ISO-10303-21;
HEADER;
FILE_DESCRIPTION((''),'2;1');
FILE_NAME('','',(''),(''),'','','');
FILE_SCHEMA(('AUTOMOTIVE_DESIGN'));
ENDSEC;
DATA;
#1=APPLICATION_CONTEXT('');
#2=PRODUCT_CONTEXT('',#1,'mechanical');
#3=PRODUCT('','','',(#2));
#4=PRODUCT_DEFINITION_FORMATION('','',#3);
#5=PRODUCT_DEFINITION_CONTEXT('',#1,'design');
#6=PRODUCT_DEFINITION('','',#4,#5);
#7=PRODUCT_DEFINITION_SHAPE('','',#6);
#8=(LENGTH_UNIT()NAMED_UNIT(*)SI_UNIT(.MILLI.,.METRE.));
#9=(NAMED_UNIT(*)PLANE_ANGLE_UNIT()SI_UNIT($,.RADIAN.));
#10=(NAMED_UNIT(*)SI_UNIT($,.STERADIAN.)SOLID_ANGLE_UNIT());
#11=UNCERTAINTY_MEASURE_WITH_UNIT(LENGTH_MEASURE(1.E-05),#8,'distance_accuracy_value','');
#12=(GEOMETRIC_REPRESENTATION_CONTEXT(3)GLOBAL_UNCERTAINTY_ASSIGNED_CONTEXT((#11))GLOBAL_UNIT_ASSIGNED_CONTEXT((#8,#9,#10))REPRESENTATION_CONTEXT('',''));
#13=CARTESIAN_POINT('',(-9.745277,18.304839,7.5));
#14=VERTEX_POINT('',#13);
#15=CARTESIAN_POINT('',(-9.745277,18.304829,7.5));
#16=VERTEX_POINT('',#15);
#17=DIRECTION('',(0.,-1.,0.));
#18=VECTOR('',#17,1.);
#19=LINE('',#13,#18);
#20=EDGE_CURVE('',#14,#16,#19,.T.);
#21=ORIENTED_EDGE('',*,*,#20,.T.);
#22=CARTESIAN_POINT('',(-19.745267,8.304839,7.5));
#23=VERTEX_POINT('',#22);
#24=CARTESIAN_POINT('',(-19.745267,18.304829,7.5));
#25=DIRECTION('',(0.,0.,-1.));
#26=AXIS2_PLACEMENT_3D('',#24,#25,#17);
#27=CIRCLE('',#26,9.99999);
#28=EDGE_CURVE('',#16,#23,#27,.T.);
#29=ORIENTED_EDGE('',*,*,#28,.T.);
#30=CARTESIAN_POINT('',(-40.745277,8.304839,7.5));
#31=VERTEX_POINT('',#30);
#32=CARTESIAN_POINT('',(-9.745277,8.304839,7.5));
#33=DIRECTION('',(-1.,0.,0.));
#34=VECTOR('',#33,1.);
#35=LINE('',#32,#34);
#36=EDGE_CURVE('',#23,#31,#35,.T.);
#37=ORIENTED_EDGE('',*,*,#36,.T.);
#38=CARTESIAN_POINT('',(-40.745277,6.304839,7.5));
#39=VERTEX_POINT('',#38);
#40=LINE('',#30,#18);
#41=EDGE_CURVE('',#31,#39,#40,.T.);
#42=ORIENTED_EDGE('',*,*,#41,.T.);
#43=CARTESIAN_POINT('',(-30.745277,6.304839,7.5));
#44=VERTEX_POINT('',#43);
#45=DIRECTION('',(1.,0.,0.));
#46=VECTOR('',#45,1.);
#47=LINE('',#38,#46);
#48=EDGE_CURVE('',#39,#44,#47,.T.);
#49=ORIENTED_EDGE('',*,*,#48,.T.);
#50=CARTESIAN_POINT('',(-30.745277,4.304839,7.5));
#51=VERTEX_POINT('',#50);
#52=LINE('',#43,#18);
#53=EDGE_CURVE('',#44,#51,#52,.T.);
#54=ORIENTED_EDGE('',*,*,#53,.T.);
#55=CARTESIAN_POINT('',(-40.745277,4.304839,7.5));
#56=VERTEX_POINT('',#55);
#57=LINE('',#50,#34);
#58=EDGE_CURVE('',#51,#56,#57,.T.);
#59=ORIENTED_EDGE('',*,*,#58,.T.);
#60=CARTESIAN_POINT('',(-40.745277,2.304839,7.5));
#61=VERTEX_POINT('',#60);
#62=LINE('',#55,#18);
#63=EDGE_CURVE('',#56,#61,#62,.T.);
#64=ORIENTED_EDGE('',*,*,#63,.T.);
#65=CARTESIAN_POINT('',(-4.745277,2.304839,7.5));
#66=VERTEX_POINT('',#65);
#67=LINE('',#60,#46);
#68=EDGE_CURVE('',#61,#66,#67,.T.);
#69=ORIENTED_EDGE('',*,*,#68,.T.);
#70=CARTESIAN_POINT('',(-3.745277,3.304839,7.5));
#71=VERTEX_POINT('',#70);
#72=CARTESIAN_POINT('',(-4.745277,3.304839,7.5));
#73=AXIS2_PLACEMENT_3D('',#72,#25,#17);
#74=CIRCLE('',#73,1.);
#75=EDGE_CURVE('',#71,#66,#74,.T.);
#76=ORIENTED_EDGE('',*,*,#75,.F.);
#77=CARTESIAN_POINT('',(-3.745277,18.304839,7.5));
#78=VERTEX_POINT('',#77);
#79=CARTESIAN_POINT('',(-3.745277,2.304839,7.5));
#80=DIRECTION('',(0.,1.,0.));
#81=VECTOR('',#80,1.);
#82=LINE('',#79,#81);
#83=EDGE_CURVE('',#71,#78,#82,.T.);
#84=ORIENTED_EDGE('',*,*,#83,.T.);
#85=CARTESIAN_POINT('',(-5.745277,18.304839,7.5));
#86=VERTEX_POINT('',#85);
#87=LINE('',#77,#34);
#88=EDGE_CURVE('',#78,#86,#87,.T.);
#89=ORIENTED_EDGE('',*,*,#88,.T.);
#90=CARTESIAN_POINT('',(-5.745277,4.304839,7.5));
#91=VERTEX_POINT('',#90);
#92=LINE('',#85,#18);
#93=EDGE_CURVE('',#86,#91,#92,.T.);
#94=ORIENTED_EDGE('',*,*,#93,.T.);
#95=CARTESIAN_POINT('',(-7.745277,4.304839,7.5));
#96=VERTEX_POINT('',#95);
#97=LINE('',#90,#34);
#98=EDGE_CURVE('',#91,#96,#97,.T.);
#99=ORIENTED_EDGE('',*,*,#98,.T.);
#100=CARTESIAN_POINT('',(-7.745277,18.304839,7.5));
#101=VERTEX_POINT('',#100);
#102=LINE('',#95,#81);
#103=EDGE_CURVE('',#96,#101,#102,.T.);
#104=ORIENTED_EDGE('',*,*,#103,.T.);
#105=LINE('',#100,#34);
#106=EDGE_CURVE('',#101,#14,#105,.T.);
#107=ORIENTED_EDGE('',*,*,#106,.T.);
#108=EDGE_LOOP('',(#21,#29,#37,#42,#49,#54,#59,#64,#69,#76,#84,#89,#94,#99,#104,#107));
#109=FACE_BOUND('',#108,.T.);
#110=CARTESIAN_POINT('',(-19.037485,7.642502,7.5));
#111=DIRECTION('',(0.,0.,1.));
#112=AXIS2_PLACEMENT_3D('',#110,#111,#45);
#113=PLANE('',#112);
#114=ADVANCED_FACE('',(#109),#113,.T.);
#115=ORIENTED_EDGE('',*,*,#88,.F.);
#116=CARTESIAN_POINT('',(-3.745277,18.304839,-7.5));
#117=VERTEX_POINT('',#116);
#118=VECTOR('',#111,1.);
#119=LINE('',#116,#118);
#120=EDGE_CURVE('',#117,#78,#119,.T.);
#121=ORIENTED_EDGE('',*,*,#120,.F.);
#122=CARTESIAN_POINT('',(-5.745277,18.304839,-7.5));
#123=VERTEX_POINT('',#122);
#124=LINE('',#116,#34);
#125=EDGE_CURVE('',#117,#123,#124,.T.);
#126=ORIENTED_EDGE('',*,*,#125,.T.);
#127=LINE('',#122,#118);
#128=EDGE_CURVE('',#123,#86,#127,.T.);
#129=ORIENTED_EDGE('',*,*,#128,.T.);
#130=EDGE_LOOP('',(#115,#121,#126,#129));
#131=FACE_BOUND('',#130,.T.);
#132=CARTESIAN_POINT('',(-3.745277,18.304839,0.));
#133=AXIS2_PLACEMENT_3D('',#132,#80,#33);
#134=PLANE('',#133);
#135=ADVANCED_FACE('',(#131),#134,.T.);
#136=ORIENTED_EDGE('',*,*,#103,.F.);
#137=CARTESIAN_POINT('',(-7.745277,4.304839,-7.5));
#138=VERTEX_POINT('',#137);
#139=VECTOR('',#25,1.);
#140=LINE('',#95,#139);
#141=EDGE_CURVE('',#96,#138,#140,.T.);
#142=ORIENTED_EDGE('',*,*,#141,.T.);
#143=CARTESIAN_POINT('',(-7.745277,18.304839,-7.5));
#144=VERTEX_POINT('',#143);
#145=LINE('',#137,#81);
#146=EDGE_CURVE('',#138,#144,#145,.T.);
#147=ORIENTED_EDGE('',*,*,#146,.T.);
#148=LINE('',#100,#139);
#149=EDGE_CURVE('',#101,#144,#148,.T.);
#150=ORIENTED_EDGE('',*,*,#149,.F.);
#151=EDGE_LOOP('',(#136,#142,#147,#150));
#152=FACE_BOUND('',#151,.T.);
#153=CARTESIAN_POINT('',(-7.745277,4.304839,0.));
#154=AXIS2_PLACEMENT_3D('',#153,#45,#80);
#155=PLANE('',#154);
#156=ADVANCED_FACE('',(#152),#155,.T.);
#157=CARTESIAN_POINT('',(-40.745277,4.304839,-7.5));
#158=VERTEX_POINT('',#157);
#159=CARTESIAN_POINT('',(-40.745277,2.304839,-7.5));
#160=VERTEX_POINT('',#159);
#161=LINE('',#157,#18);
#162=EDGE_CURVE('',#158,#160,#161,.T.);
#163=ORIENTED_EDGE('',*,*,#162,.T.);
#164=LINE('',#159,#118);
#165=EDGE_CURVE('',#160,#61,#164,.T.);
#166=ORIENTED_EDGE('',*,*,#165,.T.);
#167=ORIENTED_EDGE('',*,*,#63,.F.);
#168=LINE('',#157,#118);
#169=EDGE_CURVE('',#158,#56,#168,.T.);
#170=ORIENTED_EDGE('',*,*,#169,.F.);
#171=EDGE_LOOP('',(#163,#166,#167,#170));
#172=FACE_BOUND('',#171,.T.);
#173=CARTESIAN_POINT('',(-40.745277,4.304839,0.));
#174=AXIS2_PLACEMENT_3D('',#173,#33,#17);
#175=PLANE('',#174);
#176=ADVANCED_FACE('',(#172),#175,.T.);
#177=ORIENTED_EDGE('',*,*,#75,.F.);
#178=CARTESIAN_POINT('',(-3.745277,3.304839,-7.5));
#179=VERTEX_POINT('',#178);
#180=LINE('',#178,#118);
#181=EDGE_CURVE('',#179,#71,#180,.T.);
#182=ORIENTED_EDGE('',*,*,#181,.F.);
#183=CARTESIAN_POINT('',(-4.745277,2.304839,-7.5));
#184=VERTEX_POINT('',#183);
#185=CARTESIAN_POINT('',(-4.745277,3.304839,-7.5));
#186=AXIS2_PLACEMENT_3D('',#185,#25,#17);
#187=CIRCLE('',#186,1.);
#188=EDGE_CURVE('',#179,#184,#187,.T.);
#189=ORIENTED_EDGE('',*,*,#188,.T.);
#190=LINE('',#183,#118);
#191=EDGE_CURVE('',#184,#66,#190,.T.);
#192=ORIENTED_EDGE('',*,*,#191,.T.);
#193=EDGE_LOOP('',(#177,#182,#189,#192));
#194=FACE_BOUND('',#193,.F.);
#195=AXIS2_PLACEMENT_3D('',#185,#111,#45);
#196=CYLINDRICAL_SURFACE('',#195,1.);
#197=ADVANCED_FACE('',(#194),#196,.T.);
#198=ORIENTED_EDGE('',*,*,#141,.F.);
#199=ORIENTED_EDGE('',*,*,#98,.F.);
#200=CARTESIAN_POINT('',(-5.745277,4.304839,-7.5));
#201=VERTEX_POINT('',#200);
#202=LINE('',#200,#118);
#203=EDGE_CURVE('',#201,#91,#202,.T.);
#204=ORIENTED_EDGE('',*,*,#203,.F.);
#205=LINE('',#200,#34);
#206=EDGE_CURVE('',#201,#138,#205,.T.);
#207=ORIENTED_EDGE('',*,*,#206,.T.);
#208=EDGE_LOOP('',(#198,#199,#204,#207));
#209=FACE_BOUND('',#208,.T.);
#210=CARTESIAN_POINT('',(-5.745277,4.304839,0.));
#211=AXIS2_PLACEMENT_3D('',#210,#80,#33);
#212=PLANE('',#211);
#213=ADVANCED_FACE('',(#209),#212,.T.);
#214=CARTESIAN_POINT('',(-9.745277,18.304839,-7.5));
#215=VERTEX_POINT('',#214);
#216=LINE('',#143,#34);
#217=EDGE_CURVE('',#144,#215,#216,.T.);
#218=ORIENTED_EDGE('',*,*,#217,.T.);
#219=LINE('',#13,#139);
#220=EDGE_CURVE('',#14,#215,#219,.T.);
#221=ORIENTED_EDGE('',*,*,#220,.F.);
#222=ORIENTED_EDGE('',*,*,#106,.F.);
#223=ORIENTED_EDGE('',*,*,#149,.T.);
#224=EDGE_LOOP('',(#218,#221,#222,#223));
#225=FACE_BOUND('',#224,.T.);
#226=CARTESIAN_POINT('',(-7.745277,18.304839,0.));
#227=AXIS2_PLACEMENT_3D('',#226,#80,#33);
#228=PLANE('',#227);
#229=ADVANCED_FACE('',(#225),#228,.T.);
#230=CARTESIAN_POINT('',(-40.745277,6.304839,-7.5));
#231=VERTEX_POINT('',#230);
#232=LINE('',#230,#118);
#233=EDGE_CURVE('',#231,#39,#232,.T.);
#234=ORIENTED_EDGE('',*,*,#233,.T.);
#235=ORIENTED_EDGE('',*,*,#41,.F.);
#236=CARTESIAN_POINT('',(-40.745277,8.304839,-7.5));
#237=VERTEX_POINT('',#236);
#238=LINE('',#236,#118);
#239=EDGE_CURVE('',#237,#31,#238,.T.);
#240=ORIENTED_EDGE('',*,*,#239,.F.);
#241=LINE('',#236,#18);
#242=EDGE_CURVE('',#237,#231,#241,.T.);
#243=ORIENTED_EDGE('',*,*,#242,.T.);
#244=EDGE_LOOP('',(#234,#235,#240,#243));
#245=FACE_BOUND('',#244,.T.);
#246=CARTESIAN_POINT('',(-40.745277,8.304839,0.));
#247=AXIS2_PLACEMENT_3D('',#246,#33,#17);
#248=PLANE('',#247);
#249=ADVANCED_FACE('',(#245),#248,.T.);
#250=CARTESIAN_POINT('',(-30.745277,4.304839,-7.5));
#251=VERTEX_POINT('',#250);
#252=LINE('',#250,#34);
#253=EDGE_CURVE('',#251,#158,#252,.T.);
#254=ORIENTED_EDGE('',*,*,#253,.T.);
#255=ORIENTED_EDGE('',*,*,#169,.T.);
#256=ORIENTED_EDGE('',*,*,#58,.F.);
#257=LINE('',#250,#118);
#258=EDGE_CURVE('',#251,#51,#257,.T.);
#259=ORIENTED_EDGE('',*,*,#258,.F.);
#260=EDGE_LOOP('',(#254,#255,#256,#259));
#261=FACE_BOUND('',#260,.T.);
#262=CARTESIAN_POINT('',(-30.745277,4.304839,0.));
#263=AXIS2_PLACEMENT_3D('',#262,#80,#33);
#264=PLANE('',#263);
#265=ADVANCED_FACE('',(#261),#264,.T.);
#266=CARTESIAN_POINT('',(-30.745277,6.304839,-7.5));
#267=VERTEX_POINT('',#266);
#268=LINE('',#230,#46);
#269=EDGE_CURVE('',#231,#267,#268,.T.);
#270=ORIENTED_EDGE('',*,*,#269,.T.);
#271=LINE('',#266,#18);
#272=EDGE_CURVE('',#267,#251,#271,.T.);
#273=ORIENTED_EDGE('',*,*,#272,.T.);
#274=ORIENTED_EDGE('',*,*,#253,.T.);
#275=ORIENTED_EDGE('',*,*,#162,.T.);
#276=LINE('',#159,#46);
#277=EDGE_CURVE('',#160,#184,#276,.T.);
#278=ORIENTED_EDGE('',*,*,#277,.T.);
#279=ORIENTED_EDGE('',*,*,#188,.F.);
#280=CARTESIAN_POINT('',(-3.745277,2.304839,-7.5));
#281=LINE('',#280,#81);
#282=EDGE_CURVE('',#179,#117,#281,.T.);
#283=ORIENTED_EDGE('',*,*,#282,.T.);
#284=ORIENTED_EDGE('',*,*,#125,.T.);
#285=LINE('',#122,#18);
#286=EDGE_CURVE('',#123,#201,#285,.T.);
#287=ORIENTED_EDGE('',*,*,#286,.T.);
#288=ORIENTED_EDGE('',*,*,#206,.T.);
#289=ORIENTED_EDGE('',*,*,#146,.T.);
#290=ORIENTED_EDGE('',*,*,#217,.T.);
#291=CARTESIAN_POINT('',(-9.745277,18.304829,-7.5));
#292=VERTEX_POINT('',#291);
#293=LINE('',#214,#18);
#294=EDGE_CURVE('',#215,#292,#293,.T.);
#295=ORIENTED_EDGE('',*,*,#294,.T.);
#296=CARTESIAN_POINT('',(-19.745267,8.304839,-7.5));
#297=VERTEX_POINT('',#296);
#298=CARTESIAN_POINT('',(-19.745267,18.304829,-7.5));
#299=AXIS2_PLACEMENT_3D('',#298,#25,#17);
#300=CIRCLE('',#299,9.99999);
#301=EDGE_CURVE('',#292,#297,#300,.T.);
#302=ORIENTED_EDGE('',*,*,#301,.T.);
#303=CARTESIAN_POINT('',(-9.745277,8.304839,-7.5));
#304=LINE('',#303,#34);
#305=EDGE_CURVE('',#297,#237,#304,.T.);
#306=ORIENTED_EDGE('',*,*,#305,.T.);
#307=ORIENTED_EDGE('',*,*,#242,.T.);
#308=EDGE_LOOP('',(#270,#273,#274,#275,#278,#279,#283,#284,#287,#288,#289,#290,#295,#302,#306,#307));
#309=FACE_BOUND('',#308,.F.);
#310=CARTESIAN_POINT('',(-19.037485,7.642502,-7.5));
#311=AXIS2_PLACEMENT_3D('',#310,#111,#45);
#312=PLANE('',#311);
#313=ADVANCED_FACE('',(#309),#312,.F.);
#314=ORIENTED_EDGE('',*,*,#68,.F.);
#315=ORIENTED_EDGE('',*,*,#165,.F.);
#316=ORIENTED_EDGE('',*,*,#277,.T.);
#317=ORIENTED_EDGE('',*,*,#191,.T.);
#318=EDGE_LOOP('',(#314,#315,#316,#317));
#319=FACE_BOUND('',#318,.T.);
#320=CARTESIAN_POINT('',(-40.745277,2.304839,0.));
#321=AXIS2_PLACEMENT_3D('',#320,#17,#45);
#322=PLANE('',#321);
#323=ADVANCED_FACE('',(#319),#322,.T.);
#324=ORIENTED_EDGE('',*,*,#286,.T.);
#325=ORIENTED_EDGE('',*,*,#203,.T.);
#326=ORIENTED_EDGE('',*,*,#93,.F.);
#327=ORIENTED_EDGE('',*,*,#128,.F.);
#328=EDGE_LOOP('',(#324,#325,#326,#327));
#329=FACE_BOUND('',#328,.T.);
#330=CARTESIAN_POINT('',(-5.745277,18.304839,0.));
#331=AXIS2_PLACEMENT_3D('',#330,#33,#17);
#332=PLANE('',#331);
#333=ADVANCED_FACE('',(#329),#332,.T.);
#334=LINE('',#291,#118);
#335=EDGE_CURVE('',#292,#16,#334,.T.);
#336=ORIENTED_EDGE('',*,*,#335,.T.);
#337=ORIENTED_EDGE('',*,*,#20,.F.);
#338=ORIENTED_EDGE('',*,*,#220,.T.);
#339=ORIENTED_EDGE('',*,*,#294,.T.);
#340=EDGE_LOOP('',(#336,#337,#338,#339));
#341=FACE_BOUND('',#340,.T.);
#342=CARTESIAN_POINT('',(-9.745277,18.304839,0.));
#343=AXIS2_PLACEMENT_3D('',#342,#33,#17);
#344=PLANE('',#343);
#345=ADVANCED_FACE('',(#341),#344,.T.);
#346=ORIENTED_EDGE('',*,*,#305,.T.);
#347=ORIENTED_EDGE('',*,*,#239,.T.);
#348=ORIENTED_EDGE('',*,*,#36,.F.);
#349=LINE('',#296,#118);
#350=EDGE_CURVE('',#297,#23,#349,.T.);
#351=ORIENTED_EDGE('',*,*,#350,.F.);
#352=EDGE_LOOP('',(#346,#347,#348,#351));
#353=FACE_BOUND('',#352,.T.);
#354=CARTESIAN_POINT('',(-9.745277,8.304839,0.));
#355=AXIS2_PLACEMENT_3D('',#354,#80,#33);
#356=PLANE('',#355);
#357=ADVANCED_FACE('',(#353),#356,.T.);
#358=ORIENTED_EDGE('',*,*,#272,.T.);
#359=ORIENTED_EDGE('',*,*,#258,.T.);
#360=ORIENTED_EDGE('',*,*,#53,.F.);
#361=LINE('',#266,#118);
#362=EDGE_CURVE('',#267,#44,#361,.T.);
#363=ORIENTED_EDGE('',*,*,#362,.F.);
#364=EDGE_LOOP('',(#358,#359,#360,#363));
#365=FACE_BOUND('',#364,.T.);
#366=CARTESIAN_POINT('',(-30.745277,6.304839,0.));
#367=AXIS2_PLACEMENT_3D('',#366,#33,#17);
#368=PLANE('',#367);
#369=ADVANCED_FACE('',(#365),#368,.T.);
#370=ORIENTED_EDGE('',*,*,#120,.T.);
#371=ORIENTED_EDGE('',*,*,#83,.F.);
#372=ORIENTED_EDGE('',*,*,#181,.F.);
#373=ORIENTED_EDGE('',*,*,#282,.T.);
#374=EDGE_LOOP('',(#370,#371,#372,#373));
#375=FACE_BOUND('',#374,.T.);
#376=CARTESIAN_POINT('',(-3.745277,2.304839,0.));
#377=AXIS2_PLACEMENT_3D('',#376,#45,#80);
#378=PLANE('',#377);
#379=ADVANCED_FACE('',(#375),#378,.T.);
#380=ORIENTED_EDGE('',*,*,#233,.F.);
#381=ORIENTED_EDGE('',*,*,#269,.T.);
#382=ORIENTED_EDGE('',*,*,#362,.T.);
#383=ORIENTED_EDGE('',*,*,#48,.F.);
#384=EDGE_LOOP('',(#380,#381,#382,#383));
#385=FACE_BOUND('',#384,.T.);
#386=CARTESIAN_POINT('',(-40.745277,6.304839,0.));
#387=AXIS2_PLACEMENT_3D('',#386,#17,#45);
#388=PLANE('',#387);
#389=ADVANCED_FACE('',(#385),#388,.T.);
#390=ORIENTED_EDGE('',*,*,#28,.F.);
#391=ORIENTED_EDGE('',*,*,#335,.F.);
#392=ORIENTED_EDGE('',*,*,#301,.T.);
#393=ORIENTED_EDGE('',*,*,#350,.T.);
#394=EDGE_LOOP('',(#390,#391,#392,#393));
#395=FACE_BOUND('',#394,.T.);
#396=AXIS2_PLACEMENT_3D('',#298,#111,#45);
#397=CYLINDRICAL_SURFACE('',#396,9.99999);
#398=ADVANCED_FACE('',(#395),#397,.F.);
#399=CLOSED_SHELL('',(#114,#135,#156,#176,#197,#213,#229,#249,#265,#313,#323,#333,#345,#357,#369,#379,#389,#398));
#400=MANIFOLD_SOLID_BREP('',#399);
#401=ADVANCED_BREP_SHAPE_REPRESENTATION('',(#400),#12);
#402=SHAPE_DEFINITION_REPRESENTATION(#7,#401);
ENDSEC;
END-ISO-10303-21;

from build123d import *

# Parameters (mm, degrees)
F1_DEPTH = 7.5
F2_R     = 9.99999
F3_R     = 1


# Not quite as in the source:
# - a fillet or chamfer is up to 0.001 mm smaller than in the source, because OpenCascade refuses the exact size


with BuildPart() as f1:
    # F0 (on Top) → F1 (new body, symmetric)
    with BuildSketch(Plane.XY):
        Polygon((-9.7452771891, 18.3048394923), (-9.7452771891, 8.3048394923), (-40.7452771891, 8.3048394923), (-40.7452771891, 6.3048394923), (-30.7452771891, 6.3048394923), (-30.7452771891, 4.3048394923), (-40.7452771891, 4.3048394923), (-40.7452771891, 2.3048394923), (-3.7452771891, 2.3048394923), (-3.7452771891, 18.3048394923), (-5.7452771891, 18.3048394923), (-5.7452771891, 4.3048394923), (-7.7452771891, 4.3048394923), (-7.7452771891, 18.3048394923), align=None)
    extrude(amount=F1_DEPTH, both=True)

    # F2 (radius 10 in the source; OpenCascade refuses exactly that, so slightly less here)
    f2_edges = [f1.edges().sort_by_distance(p)[0] for p in [
        (-9.745277, 8.304839, 0),
    ]]
    fillet(f2_edges, radius=F2_R)

    # F3
    f3_edges = [f1.edges().sort_by_distance(p)[0] for p in [
        (-3.745277, 2.304839, 0),
    ]]
    fillet(f3_edges, radius=F3_R)


solid = f1.part
